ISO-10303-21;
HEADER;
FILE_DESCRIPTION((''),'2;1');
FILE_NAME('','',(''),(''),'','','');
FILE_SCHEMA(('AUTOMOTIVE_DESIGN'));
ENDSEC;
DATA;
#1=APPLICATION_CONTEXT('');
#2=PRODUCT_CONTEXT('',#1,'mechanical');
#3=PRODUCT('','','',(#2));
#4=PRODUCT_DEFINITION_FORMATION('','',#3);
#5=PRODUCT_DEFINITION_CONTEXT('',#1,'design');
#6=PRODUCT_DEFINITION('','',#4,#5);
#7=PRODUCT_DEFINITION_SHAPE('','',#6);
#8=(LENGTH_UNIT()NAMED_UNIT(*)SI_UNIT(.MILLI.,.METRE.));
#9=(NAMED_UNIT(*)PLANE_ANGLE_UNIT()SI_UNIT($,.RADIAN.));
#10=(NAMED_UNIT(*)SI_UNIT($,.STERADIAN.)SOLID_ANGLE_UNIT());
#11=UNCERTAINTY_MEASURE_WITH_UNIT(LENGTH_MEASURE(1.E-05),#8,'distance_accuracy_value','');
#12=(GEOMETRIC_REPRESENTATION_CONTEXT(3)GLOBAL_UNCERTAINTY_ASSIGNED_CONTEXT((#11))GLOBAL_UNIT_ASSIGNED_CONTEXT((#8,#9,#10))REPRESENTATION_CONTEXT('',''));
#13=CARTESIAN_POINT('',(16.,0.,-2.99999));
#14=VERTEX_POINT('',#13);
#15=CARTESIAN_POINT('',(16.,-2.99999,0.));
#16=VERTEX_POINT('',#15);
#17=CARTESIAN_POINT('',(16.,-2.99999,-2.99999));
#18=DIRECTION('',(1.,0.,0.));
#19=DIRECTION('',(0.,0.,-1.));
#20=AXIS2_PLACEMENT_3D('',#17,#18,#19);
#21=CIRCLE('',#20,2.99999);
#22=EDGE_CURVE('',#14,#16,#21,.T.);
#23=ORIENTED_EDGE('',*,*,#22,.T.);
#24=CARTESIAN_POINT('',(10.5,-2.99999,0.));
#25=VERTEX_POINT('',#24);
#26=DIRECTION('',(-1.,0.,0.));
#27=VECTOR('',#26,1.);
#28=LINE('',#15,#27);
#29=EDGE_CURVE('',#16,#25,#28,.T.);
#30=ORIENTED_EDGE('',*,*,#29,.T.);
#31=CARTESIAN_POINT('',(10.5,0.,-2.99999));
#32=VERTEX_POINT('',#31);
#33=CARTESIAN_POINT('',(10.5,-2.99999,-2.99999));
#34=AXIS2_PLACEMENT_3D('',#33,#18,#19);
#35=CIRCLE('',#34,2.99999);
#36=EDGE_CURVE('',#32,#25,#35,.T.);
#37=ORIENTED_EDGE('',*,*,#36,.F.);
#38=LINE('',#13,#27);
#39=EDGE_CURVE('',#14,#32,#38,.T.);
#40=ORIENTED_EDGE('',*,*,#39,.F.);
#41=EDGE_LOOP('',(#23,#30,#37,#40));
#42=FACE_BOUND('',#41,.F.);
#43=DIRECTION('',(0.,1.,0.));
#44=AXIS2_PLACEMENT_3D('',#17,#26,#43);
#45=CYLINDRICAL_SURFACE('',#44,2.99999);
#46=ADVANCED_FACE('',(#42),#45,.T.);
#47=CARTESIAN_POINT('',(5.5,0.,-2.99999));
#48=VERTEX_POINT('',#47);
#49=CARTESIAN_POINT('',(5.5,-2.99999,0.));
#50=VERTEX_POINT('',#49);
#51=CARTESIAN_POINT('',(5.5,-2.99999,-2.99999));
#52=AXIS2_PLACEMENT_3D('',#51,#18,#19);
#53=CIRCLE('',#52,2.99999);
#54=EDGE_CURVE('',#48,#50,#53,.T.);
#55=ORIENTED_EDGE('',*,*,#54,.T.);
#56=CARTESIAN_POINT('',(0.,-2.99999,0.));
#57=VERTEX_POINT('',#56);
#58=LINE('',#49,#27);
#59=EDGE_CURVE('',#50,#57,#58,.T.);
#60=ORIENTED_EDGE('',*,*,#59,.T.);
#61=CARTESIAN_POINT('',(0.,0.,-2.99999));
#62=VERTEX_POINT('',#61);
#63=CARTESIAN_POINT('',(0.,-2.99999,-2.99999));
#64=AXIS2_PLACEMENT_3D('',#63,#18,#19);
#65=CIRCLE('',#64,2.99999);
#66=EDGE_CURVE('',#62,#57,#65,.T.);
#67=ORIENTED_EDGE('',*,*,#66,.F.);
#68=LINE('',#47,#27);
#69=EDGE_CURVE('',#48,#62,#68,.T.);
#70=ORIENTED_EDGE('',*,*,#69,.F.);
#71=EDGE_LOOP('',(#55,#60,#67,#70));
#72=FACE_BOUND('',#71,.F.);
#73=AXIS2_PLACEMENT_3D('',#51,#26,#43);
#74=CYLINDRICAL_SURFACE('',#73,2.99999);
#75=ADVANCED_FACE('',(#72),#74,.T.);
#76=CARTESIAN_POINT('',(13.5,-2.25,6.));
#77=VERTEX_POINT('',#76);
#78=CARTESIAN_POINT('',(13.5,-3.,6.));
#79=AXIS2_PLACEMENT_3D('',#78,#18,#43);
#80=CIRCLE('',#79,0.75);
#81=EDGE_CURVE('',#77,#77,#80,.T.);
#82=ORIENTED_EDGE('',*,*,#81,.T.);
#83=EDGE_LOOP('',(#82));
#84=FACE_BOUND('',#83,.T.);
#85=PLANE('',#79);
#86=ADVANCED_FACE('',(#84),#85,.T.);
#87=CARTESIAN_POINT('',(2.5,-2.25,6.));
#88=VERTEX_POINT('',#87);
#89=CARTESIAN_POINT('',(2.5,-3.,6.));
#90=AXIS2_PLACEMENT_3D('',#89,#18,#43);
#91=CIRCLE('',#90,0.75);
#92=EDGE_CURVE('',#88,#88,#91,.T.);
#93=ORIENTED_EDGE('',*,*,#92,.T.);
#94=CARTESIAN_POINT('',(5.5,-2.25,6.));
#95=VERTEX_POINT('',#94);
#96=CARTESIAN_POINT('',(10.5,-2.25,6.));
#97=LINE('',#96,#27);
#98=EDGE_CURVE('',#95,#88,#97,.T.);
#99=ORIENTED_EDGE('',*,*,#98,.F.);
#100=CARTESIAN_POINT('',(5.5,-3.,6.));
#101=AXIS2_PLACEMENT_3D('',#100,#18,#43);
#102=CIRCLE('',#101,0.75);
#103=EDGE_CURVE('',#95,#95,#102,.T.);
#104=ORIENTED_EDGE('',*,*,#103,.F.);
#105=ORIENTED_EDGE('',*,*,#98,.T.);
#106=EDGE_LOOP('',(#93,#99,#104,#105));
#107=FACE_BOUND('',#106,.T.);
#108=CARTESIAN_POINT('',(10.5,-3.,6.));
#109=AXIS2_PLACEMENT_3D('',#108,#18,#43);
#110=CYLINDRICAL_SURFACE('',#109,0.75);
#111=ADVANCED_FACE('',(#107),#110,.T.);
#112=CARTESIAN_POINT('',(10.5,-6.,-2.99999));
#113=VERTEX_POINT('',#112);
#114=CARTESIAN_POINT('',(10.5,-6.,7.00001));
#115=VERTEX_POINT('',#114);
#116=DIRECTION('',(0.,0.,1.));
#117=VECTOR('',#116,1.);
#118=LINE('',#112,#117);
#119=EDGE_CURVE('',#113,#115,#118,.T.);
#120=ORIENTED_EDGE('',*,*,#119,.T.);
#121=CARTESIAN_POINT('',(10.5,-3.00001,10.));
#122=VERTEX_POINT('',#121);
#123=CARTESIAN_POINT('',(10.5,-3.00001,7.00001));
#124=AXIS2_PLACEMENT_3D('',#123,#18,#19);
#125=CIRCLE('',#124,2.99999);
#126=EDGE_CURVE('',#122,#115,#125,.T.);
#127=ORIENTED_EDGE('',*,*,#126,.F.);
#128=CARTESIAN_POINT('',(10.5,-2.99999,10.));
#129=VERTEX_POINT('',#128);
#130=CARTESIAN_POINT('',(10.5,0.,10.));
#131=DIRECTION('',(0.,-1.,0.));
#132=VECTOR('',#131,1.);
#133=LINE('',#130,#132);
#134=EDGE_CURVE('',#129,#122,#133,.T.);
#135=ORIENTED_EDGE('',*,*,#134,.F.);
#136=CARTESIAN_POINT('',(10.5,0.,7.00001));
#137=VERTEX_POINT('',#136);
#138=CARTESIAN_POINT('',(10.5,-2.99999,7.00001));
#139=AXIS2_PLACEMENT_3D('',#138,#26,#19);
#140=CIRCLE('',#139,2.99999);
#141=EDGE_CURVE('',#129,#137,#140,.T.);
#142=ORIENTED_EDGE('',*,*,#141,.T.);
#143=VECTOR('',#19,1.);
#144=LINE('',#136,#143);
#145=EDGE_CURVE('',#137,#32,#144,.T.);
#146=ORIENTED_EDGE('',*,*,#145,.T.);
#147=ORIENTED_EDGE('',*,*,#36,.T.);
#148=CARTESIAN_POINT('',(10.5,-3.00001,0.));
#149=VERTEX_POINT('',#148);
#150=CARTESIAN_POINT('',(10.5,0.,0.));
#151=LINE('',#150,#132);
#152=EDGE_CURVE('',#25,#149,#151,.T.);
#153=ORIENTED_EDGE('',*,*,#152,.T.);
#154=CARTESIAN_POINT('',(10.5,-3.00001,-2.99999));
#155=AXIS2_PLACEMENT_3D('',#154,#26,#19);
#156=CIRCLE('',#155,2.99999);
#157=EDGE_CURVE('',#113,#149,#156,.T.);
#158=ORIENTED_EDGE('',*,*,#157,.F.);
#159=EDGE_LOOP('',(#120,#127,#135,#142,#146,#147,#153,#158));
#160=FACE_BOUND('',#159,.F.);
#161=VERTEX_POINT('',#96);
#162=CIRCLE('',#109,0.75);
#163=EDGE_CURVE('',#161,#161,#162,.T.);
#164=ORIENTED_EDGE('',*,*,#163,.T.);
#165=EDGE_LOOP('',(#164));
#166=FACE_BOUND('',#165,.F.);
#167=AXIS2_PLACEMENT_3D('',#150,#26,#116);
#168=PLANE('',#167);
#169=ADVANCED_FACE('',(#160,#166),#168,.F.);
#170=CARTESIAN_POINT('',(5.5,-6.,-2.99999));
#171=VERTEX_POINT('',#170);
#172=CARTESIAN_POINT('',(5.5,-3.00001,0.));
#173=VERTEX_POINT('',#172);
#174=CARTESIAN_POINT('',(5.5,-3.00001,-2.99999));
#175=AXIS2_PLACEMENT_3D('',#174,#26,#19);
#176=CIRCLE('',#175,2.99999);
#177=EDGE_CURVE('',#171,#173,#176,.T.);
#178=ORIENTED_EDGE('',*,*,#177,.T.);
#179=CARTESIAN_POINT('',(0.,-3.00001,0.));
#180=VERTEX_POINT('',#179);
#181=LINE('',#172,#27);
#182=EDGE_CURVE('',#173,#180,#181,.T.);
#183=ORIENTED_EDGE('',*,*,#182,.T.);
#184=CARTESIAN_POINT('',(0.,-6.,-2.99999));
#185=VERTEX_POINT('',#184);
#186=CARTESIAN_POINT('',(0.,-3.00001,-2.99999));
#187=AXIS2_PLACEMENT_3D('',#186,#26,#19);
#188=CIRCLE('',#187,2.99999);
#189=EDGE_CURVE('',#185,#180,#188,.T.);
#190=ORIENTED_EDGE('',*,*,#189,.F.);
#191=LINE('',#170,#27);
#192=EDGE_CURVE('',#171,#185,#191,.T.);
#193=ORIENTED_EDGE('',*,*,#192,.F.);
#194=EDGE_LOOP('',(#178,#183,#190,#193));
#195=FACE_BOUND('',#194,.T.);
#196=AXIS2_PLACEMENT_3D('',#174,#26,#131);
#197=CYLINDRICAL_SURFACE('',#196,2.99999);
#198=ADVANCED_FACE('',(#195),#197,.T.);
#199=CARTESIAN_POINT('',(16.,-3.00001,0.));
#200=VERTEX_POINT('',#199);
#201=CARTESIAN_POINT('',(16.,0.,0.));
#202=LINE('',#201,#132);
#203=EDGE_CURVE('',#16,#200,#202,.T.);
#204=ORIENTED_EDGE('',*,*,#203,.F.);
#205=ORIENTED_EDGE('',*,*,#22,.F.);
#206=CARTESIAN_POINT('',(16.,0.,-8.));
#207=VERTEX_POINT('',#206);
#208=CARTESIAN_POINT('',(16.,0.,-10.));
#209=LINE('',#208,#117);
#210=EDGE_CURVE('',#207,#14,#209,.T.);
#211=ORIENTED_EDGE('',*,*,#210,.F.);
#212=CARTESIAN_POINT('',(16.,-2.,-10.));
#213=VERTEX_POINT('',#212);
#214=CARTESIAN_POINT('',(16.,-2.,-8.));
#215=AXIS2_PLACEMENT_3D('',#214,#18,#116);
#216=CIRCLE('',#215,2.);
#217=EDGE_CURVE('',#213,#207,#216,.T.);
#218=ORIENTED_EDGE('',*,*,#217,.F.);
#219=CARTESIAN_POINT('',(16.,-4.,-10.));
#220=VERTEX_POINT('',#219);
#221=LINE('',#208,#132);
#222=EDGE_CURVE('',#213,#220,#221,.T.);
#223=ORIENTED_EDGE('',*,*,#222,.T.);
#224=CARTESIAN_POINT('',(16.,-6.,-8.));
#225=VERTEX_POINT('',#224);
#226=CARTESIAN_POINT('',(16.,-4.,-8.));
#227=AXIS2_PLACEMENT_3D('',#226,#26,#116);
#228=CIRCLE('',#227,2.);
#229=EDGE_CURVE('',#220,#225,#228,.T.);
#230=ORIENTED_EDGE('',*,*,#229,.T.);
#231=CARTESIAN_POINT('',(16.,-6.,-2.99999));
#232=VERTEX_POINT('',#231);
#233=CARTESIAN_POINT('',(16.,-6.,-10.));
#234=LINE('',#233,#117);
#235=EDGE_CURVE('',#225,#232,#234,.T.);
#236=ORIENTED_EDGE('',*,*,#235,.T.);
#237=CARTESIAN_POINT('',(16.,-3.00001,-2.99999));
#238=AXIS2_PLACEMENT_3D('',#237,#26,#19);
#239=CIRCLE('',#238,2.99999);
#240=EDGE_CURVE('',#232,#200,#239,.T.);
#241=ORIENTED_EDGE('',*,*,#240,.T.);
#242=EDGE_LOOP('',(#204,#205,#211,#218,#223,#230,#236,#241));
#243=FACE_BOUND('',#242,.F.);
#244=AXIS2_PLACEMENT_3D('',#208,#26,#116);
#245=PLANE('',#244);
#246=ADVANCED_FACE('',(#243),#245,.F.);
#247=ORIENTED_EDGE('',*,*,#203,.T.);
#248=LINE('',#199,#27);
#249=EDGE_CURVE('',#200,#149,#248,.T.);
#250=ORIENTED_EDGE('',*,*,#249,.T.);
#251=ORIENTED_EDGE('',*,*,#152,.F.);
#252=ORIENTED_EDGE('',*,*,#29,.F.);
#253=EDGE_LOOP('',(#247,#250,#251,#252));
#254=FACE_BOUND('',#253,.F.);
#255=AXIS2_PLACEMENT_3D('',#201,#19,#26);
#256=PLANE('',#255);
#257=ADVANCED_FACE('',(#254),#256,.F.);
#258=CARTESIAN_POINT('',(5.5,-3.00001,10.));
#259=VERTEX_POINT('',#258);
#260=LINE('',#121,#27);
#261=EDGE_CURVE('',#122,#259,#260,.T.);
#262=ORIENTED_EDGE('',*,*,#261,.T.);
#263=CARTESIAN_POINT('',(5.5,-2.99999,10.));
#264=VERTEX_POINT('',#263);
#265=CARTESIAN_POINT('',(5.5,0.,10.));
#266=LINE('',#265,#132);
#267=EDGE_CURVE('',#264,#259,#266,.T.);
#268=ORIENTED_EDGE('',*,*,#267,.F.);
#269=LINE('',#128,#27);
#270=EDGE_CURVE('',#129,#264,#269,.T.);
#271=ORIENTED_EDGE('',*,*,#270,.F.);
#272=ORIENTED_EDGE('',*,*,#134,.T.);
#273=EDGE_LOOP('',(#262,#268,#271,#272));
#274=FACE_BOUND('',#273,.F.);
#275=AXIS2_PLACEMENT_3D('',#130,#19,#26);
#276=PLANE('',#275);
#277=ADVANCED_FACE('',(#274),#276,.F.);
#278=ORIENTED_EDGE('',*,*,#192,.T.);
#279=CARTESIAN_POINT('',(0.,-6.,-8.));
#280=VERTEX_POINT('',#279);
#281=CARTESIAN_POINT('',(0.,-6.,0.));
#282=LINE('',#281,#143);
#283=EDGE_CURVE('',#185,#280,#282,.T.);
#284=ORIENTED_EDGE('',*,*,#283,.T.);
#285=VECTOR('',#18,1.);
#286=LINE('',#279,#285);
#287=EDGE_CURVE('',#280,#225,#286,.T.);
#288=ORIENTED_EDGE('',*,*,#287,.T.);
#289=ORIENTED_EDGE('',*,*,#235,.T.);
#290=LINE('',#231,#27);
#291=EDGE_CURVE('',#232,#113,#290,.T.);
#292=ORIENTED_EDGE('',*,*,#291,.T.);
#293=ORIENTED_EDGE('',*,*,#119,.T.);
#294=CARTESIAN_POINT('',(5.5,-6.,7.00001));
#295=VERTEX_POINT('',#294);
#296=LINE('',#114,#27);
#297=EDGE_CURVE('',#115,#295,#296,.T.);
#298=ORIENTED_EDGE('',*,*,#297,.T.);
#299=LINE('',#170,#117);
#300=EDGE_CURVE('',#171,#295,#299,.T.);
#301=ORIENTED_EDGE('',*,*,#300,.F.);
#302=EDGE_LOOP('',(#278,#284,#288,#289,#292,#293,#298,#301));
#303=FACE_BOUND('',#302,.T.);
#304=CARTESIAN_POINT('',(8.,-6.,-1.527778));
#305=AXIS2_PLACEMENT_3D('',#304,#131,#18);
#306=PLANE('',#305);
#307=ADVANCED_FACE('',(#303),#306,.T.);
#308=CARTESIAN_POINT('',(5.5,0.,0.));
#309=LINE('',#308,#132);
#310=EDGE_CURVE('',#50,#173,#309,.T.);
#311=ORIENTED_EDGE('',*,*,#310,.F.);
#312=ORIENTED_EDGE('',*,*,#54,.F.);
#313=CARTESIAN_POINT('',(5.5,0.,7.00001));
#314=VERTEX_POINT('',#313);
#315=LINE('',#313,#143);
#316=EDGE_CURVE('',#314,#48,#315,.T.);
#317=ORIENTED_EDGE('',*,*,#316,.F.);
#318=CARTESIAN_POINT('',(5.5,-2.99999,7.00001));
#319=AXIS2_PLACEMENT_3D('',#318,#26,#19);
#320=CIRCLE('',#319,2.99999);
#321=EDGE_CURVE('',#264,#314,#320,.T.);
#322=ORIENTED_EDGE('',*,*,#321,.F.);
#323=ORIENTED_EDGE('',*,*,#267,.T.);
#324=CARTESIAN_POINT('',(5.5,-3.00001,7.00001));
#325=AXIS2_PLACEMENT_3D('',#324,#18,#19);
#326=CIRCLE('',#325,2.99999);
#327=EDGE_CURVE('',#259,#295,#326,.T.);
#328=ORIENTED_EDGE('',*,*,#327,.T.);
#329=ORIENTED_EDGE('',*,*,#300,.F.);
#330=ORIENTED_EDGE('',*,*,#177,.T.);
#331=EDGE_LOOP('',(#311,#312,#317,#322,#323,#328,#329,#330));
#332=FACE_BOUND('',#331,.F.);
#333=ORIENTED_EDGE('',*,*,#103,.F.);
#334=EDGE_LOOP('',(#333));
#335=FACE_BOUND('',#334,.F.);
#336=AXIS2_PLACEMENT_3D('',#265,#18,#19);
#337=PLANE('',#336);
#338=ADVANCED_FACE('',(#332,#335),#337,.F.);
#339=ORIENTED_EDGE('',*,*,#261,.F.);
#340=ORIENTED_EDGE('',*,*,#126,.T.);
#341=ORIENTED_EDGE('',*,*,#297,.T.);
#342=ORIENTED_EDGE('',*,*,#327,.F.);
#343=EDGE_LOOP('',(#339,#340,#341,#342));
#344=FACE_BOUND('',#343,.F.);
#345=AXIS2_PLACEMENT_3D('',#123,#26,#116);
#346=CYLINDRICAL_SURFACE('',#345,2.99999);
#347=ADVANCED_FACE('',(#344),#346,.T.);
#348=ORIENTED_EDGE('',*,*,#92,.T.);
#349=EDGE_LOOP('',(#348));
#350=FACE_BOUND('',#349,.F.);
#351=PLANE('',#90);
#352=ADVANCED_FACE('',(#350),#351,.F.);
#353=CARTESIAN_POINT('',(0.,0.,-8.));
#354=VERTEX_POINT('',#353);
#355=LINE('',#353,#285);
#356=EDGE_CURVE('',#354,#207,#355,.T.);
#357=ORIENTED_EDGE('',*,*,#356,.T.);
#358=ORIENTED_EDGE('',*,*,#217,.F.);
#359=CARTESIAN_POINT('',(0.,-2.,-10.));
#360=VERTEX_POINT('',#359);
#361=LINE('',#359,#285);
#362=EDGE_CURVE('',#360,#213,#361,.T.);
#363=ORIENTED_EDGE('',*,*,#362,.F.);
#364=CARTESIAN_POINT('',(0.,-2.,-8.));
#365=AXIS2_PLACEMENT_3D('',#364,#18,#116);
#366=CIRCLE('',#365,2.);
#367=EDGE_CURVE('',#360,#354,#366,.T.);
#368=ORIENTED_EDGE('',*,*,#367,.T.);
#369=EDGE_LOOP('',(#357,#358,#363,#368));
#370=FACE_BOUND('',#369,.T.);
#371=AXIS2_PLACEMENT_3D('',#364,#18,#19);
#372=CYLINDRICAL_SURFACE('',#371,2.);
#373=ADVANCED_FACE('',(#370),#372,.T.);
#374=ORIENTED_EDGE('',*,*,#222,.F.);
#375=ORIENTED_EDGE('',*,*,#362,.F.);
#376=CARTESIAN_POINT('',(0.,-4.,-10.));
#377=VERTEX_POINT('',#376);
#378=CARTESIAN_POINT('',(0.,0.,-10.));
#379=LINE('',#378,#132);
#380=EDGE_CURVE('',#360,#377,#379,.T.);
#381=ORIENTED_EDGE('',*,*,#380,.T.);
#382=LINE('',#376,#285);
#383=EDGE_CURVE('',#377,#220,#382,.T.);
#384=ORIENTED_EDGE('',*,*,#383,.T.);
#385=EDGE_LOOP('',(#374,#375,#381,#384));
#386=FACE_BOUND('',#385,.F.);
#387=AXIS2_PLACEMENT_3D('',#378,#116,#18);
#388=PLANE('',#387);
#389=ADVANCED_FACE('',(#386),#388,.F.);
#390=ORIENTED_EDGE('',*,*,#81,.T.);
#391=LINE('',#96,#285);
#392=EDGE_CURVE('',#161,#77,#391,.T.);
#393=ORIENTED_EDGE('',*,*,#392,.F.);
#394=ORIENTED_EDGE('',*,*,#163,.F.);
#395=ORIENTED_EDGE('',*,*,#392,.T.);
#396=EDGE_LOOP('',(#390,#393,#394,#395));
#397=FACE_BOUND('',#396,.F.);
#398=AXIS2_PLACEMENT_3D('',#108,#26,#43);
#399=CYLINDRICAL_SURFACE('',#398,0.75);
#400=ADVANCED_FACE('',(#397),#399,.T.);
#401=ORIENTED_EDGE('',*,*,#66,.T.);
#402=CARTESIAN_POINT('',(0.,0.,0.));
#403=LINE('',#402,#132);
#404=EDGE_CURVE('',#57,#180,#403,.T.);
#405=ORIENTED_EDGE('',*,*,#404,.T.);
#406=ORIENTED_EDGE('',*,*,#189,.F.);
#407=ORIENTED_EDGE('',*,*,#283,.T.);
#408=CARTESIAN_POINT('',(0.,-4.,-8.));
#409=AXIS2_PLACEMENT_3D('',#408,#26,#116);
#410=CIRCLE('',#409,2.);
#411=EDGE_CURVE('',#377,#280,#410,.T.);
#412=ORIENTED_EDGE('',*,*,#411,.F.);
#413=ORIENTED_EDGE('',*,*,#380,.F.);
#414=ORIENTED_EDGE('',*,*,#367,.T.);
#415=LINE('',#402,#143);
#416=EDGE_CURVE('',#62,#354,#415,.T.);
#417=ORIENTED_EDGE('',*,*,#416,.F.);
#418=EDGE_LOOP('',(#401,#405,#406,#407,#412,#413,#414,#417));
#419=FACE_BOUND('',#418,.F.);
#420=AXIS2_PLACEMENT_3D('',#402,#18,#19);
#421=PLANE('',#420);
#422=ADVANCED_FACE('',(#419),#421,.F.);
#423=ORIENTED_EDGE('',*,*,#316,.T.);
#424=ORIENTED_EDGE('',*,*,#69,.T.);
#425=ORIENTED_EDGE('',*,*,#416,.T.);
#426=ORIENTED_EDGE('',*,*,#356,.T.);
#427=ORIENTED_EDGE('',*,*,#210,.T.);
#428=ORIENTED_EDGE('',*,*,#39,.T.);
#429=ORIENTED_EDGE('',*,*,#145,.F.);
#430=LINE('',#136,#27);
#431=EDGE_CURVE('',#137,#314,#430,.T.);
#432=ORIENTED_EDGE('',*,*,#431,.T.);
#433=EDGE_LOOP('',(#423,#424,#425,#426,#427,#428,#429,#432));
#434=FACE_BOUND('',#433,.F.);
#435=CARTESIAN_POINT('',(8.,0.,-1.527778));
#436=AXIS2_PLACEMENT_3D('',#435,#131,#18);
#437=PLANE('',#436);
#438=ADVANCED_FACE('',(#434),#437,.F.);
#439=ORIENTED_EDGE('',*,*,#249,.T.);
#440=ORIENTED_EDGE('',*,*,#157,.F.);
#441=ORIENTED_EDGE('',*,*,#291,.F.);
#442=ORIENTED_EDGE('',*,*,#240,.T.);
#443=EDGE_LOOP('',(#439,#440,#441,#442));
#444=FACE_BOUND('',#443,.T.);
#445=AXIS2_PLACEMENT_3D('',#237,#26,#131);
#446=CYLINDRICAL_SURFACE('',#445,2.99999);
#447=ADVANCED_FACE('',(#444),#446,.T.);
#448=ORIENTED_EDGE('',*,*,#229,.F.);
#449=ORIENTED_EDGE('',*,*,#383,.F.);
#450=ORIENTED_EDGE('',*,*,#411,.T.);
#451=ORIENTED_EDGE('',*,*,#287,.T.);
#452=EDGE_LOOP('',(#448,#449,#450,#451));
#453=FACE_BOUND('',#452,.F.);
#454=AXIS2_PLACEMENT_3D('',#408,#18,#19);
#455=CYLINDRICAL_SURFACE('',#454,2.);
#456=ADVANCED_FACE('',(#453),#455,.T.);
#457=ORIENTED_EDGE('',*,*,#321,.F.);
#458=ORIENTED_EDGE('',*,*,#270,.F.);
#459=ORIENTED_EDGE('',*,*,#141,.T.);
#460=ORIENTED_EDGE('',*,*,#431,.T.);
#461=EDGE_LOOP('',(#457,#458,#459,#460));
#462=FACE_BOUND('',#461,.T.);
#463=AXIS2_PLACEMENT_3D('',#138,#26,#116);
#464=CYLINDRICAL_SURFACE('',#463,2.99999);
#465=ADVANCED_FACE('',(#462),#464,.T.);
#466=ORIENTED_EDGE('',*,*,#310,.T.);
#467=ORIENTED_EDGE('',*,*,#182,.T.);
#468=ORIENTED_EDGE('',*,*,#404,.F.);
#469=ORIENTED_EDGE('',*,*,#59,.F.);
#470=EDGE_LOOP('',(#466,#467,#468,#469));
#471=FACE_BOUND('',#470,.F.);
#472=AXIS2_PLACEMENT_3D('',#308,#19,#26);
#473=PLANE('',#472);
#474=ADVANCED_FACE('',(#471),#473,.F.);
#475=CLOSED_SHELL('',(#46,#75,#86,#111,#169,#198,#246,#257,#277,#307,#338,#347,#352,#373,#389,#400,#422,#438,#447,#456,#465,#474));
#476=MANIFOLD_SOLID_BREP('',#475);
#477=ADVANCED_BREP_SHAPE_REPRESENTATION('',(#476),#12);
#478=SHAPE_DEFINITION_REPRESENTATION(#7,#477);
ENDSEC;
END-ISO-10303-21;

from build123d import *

# Parameters (mm, degrees)
F1_DEPTH      = 6
F2_R          = 0.75
F3_DEPTH      = 3
F3_DEPTH_BACK = 8
F4_R          = 2.99999
F5_R          = 2.99999
F6_R          = 2


# Not quite as in the source:
# - a fillet or chamfer is up to 0.001 mm smaller than in the source, because OpenCascade refuses the exact size


with BuildPart() as f1:
    # F0 (on Front) → F1 (new body)
    with BuildSketch(Plane.XZ):
        Polygon((5.5, 0), (0, 0), (0, -10), (16, -10), (16, 0), (10.5, 0), (10.5, 10), (5.5, 10), align=None)
    extrude(amount=F1_DEPTH)

    # F2 (on face) → F3 (join, two sides)
    with BuildSketch(Plane.YZ.offset(10.5)) as f3_sk:
        with Locations((-3, 6)):
            Circle(F2_R)
    extrude(amount=F3_DEPTH)
    extrude(f3_sk.sketch, amount=-F3_DEPTH_BACK)

    # F4 (radius 3 in the source; OpenCascade refuses exactly that, so slightly less here)
    f4_edges = [f1.edges().sort_by_distance(p)[0] for p in [
        (8, -6, 10),
        (8, 0, 10),
    ]]
    fillet(f4_edges, radius=F4_R)

    # F5 (radius 3 in the source; OpenCascade refuses exactly that, so slightly less here)
    f5_edges = [f1.edges().sort_by_distance(p)[0] for p in [
        (2.75, -6, 0),
        (2.75, 0, 0),
        (13.25, -6, 0),
        (13.25, 0, 0),
    ]]
    fillet(f5_edges, radius=F5_R)

    # F6
    f6_edges = [f1.edges().sort_by_distance(p)[0] for p in [
        (8, -6, -10),
        (8, 0, -10),
    ]]
    fillet(f6_edges, radius=F6_R)


solid = f1.part
